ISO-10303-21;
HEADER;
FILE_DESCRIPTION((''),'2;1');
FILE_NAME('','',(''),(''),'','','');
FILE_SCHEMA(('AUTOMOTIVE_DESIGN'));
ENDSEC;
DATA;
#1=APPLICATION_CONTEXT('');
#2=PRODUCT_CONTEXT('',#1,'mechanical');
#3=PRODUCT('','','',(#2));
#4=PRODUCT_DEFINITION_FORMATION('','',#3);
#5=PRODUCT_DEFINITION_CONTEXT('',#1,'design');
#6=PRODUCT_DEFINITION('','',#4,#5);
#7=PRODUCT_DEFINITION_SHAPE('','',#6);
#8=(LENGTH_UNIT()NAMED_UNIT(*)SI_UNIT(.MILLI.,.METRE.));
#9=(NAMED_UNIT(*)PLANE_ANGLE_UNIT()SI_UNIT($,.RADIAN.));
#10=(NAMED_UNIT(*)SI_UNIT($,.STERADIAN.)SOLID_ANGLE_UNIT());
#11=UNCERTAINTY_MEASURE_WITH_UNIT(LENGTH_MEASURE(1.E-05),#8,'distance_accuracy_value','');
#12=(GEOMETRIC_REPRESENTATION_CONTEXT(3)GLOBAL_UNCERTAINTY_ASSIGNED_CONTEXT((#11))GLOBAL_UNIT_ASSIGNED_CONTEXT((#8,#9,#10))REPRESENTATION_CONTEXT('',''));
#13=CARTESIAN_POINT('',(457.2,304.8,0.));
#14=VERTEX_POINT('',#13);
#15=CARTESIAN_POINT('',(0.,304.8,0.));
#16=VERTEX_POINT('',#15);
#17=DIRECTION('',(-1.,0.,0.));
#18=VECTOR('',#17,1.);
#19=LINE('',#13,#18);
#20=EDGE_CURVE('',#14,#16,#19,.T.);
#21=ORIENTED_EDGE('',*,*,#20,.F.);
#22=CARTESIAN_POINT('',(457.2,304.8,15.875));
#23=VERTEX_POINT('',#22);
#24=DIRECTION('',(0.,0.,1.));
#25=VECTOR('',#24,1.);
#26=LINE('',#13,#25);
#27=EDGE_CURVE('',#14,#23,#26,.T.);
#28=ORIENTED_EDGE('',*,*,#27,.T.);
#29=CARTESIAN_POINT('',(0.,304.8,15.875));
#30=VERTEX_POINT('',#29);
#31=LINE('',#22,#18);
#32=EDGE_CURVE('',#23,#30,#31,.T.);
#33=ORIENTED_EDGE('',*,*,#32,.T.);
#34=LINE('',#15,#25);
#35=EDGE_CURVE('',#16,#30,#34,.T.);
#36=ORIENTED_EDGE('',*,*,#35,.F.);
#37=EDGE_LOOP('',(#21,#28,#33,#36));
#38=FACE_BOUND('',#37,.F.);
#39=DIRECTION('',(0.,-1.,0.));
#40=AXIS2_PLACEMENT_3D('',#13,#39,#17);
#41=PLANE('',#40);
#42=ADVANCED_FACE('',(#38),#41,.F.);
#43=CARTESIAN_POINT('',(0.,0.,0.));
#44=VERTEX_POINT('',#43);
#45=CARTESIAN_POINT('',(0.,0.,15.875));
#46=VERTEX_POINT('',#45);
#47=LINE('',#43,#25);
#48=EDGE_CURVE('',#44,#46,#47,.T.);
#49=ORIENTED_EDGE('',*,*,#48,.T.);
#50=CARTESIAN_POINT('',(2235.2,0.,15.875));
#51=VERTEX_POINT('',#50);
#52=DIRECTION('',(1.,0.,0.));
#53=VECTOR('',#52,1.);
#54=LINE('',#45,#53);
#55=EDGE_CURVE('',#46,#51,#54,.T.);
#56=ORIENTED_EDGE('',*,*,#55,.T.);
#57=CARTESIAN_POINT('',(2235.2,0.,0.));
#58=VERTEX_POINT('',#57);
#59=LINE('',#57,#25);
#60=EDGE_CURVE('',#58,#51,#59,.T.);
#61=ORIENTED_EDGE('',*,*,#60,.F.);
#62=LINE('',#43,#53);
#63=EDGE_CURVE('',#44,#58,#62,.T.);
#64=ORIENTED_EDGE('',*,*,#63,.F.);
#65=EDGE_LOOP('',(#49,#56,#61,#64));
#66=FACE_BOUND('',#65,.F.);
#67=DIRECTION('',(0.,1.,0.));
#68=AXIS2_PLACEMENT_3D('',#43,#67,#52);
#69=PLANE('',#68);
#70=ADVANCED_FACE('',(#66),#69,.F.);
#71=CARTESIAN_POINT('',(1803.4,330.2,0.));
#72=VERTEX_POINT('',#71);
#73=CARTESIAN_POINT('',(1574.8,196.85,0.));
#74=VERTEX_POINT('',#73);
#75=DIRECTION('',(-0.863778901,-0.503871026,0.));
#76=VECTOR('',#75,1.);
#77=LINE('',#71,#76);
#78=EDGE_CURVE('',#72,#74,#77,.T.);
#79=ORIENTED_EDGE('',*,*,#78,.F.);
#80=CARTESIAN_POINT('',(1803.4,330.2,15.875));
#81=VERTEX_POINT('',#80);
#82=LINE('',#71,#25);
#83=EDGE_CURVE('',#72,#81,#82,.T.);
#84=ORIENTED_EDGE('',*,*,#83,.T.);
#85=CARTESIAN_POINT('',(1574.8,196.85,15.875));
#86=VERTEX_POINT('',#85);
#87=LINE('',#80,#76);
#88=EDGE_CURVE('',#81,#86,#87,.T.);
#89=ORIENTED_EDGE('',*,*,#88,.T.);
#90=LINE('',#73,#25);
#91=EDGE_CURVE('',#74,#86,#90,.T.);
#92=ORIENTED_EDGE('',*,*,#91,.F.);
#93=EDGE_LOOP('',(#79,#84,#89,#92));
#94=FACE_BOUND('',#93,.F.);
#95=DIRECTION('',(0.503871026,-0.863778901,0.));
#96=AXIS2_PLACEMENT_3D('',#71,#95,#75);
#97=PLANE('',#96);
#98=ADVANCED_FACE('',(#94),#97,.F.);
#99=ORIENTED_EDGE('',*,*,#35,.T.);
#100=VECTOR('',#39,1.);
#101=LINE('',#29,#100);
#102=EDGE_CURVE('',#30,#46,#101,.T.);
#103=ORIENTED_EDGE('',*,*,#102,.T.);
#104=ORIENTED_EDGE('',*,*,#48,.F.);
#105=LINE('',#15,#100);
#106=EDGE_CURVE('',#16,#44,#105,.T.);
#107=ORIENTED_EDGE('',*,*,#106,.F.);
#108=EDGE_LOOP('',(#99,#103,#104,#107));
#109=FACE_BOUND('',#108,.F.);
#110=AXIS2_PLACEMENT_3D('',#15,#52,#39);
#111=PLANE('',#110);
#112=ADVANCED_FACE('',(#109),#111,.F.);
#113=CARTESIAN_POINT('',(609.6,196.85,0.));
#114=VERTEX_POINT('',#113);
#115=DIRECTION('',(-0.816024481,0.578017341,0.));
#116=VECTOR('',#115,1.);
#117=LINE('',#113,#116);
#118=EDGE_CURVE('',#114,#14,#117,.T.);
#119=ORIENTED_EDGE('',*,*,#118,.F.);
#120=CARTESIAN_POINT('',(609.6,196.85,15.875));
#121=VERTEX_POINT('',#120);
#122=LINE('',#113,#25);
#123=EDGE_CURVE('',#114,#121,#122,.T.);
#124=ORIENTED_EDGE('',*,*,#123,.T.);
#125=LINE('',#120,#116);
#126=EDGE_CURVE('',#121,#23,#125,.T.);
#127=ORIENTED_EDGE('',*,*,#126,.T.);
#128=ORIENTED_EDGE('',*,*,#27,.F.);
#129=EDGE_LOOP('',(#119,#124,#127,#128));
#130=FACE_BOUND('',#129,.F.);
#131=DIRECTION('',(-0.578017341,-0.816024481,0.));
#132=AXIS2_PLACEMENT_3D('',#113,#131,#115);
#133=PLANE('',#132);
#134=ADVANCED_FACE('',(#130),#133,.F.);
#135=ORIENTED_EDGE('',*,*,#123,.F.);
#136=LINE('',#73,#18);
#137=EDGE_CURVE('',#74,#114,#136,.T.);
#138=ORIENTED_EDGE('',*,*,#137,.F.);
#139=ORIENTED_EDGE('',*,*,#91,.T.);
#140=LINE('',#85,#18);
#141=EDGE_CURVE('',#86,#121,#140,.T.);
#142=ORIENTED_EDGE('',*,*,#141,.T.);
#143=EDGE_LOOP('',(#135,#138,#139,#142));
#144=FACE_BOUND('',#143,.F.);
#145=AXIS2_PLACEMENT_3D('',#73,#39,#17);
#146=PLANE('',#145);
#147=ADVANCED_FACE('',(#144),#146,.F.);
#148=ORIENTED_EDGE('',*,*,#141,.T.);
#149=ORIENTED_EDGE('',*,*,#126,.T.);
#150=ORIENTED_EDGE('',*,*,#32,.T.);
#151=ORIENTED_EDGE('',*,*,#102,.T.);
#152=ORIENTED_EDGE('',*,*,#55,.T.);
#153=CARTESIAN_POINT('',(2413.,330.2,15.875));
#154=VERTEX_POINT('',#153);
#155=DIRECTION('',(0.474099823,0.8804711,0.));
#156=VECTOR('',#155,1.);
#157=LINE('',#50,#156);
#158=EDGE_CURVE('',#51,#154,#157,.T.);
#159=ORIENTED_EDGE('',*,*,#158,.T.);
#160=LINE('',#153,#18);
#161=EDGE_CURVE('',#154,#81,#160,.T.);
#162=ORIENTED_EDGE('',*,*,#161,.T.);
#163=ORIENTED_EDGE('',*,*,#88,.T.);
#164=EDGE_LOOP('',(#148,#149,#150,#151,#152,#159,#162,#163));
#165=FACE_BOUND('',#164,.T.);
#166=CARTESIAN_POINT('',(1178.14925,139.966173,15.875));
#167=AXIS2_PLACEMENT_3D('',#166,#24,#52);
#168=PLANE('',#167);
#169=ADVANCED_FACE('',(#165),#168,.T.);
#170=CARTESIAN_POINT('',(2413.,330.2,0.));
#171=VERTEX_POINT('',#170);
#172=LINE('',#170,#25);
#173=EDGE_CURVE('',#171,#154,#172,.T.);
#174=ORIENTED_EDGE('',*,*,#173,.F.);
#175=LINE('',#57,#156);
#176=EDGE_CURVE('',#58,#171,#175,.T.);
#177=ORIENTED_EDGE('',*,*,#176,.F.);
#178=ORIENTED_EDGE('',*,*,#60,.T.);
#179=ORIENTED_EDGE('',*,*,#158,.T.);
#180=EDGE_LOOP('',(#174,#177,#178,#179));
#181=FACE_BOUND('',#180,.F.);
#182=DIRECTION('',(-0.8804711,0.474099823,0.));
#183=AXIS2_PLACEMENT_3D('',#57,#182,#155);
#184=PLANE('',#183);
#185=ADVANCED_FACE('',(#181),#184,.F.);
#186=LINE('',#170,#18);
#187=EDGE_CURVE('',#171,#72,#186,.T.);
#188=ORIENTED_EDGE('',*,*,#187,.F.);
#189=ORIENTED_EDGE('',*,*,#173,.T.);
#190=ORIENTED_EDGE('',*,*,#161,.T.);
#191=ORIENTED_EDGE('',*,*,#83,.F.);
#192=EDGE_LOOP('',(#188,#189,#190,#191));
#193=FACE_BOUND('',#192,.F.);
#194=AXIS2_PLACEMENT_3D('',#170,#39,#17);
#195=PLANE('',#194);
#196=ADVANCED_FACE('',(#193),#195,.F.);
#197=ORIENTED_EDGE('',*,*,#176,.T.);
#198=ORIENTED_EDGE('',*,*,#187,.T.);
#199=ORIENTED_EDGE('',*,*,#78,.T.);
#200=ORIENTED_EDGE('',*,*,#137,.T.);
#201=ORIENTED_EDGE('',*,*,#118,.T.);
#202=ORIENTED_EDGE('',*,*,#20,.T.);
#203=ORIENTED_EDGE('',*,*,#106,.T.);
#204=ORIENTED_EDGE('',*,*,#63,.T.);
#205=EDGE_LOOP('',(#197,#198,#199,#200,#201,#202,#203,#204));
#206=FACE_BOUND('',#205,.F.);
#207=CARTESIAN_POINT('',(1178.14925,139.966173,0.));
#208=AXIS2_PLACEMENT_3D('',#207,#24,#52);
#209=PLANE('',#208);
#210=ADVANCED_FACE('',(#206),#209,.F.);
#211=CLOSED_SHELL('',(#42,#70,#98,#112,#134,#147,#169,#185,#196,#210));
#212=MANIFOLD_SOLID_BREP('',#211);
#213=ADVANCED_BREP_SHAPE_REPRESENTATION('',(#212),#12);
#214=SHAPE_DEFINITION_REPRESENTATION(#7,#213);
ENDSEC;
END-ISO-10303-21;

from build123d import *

# Parameters (mm, degrees)
F1_DEPTH = 15.875


# Not quite as in the source:
# - a length typed as a fraction of an inch, garbled in the dataset ("3 / 203.2 mm" for 3/8 in), is restored


with BuildPart() as f1:
    # F0 (on Top) → F1 (new body)
    with BuildSketch(Plane.XY):
        Polygon((0, 304.8), (0, 0), (2235.2, 0), (2413, 330.2), (1803.4, 330.2), (1574.8, 196.85), (609.6, 196.85), (457.2, 304.8), align=None)
    extrude(amount=F1_DEPTH)


solid = f1.part
